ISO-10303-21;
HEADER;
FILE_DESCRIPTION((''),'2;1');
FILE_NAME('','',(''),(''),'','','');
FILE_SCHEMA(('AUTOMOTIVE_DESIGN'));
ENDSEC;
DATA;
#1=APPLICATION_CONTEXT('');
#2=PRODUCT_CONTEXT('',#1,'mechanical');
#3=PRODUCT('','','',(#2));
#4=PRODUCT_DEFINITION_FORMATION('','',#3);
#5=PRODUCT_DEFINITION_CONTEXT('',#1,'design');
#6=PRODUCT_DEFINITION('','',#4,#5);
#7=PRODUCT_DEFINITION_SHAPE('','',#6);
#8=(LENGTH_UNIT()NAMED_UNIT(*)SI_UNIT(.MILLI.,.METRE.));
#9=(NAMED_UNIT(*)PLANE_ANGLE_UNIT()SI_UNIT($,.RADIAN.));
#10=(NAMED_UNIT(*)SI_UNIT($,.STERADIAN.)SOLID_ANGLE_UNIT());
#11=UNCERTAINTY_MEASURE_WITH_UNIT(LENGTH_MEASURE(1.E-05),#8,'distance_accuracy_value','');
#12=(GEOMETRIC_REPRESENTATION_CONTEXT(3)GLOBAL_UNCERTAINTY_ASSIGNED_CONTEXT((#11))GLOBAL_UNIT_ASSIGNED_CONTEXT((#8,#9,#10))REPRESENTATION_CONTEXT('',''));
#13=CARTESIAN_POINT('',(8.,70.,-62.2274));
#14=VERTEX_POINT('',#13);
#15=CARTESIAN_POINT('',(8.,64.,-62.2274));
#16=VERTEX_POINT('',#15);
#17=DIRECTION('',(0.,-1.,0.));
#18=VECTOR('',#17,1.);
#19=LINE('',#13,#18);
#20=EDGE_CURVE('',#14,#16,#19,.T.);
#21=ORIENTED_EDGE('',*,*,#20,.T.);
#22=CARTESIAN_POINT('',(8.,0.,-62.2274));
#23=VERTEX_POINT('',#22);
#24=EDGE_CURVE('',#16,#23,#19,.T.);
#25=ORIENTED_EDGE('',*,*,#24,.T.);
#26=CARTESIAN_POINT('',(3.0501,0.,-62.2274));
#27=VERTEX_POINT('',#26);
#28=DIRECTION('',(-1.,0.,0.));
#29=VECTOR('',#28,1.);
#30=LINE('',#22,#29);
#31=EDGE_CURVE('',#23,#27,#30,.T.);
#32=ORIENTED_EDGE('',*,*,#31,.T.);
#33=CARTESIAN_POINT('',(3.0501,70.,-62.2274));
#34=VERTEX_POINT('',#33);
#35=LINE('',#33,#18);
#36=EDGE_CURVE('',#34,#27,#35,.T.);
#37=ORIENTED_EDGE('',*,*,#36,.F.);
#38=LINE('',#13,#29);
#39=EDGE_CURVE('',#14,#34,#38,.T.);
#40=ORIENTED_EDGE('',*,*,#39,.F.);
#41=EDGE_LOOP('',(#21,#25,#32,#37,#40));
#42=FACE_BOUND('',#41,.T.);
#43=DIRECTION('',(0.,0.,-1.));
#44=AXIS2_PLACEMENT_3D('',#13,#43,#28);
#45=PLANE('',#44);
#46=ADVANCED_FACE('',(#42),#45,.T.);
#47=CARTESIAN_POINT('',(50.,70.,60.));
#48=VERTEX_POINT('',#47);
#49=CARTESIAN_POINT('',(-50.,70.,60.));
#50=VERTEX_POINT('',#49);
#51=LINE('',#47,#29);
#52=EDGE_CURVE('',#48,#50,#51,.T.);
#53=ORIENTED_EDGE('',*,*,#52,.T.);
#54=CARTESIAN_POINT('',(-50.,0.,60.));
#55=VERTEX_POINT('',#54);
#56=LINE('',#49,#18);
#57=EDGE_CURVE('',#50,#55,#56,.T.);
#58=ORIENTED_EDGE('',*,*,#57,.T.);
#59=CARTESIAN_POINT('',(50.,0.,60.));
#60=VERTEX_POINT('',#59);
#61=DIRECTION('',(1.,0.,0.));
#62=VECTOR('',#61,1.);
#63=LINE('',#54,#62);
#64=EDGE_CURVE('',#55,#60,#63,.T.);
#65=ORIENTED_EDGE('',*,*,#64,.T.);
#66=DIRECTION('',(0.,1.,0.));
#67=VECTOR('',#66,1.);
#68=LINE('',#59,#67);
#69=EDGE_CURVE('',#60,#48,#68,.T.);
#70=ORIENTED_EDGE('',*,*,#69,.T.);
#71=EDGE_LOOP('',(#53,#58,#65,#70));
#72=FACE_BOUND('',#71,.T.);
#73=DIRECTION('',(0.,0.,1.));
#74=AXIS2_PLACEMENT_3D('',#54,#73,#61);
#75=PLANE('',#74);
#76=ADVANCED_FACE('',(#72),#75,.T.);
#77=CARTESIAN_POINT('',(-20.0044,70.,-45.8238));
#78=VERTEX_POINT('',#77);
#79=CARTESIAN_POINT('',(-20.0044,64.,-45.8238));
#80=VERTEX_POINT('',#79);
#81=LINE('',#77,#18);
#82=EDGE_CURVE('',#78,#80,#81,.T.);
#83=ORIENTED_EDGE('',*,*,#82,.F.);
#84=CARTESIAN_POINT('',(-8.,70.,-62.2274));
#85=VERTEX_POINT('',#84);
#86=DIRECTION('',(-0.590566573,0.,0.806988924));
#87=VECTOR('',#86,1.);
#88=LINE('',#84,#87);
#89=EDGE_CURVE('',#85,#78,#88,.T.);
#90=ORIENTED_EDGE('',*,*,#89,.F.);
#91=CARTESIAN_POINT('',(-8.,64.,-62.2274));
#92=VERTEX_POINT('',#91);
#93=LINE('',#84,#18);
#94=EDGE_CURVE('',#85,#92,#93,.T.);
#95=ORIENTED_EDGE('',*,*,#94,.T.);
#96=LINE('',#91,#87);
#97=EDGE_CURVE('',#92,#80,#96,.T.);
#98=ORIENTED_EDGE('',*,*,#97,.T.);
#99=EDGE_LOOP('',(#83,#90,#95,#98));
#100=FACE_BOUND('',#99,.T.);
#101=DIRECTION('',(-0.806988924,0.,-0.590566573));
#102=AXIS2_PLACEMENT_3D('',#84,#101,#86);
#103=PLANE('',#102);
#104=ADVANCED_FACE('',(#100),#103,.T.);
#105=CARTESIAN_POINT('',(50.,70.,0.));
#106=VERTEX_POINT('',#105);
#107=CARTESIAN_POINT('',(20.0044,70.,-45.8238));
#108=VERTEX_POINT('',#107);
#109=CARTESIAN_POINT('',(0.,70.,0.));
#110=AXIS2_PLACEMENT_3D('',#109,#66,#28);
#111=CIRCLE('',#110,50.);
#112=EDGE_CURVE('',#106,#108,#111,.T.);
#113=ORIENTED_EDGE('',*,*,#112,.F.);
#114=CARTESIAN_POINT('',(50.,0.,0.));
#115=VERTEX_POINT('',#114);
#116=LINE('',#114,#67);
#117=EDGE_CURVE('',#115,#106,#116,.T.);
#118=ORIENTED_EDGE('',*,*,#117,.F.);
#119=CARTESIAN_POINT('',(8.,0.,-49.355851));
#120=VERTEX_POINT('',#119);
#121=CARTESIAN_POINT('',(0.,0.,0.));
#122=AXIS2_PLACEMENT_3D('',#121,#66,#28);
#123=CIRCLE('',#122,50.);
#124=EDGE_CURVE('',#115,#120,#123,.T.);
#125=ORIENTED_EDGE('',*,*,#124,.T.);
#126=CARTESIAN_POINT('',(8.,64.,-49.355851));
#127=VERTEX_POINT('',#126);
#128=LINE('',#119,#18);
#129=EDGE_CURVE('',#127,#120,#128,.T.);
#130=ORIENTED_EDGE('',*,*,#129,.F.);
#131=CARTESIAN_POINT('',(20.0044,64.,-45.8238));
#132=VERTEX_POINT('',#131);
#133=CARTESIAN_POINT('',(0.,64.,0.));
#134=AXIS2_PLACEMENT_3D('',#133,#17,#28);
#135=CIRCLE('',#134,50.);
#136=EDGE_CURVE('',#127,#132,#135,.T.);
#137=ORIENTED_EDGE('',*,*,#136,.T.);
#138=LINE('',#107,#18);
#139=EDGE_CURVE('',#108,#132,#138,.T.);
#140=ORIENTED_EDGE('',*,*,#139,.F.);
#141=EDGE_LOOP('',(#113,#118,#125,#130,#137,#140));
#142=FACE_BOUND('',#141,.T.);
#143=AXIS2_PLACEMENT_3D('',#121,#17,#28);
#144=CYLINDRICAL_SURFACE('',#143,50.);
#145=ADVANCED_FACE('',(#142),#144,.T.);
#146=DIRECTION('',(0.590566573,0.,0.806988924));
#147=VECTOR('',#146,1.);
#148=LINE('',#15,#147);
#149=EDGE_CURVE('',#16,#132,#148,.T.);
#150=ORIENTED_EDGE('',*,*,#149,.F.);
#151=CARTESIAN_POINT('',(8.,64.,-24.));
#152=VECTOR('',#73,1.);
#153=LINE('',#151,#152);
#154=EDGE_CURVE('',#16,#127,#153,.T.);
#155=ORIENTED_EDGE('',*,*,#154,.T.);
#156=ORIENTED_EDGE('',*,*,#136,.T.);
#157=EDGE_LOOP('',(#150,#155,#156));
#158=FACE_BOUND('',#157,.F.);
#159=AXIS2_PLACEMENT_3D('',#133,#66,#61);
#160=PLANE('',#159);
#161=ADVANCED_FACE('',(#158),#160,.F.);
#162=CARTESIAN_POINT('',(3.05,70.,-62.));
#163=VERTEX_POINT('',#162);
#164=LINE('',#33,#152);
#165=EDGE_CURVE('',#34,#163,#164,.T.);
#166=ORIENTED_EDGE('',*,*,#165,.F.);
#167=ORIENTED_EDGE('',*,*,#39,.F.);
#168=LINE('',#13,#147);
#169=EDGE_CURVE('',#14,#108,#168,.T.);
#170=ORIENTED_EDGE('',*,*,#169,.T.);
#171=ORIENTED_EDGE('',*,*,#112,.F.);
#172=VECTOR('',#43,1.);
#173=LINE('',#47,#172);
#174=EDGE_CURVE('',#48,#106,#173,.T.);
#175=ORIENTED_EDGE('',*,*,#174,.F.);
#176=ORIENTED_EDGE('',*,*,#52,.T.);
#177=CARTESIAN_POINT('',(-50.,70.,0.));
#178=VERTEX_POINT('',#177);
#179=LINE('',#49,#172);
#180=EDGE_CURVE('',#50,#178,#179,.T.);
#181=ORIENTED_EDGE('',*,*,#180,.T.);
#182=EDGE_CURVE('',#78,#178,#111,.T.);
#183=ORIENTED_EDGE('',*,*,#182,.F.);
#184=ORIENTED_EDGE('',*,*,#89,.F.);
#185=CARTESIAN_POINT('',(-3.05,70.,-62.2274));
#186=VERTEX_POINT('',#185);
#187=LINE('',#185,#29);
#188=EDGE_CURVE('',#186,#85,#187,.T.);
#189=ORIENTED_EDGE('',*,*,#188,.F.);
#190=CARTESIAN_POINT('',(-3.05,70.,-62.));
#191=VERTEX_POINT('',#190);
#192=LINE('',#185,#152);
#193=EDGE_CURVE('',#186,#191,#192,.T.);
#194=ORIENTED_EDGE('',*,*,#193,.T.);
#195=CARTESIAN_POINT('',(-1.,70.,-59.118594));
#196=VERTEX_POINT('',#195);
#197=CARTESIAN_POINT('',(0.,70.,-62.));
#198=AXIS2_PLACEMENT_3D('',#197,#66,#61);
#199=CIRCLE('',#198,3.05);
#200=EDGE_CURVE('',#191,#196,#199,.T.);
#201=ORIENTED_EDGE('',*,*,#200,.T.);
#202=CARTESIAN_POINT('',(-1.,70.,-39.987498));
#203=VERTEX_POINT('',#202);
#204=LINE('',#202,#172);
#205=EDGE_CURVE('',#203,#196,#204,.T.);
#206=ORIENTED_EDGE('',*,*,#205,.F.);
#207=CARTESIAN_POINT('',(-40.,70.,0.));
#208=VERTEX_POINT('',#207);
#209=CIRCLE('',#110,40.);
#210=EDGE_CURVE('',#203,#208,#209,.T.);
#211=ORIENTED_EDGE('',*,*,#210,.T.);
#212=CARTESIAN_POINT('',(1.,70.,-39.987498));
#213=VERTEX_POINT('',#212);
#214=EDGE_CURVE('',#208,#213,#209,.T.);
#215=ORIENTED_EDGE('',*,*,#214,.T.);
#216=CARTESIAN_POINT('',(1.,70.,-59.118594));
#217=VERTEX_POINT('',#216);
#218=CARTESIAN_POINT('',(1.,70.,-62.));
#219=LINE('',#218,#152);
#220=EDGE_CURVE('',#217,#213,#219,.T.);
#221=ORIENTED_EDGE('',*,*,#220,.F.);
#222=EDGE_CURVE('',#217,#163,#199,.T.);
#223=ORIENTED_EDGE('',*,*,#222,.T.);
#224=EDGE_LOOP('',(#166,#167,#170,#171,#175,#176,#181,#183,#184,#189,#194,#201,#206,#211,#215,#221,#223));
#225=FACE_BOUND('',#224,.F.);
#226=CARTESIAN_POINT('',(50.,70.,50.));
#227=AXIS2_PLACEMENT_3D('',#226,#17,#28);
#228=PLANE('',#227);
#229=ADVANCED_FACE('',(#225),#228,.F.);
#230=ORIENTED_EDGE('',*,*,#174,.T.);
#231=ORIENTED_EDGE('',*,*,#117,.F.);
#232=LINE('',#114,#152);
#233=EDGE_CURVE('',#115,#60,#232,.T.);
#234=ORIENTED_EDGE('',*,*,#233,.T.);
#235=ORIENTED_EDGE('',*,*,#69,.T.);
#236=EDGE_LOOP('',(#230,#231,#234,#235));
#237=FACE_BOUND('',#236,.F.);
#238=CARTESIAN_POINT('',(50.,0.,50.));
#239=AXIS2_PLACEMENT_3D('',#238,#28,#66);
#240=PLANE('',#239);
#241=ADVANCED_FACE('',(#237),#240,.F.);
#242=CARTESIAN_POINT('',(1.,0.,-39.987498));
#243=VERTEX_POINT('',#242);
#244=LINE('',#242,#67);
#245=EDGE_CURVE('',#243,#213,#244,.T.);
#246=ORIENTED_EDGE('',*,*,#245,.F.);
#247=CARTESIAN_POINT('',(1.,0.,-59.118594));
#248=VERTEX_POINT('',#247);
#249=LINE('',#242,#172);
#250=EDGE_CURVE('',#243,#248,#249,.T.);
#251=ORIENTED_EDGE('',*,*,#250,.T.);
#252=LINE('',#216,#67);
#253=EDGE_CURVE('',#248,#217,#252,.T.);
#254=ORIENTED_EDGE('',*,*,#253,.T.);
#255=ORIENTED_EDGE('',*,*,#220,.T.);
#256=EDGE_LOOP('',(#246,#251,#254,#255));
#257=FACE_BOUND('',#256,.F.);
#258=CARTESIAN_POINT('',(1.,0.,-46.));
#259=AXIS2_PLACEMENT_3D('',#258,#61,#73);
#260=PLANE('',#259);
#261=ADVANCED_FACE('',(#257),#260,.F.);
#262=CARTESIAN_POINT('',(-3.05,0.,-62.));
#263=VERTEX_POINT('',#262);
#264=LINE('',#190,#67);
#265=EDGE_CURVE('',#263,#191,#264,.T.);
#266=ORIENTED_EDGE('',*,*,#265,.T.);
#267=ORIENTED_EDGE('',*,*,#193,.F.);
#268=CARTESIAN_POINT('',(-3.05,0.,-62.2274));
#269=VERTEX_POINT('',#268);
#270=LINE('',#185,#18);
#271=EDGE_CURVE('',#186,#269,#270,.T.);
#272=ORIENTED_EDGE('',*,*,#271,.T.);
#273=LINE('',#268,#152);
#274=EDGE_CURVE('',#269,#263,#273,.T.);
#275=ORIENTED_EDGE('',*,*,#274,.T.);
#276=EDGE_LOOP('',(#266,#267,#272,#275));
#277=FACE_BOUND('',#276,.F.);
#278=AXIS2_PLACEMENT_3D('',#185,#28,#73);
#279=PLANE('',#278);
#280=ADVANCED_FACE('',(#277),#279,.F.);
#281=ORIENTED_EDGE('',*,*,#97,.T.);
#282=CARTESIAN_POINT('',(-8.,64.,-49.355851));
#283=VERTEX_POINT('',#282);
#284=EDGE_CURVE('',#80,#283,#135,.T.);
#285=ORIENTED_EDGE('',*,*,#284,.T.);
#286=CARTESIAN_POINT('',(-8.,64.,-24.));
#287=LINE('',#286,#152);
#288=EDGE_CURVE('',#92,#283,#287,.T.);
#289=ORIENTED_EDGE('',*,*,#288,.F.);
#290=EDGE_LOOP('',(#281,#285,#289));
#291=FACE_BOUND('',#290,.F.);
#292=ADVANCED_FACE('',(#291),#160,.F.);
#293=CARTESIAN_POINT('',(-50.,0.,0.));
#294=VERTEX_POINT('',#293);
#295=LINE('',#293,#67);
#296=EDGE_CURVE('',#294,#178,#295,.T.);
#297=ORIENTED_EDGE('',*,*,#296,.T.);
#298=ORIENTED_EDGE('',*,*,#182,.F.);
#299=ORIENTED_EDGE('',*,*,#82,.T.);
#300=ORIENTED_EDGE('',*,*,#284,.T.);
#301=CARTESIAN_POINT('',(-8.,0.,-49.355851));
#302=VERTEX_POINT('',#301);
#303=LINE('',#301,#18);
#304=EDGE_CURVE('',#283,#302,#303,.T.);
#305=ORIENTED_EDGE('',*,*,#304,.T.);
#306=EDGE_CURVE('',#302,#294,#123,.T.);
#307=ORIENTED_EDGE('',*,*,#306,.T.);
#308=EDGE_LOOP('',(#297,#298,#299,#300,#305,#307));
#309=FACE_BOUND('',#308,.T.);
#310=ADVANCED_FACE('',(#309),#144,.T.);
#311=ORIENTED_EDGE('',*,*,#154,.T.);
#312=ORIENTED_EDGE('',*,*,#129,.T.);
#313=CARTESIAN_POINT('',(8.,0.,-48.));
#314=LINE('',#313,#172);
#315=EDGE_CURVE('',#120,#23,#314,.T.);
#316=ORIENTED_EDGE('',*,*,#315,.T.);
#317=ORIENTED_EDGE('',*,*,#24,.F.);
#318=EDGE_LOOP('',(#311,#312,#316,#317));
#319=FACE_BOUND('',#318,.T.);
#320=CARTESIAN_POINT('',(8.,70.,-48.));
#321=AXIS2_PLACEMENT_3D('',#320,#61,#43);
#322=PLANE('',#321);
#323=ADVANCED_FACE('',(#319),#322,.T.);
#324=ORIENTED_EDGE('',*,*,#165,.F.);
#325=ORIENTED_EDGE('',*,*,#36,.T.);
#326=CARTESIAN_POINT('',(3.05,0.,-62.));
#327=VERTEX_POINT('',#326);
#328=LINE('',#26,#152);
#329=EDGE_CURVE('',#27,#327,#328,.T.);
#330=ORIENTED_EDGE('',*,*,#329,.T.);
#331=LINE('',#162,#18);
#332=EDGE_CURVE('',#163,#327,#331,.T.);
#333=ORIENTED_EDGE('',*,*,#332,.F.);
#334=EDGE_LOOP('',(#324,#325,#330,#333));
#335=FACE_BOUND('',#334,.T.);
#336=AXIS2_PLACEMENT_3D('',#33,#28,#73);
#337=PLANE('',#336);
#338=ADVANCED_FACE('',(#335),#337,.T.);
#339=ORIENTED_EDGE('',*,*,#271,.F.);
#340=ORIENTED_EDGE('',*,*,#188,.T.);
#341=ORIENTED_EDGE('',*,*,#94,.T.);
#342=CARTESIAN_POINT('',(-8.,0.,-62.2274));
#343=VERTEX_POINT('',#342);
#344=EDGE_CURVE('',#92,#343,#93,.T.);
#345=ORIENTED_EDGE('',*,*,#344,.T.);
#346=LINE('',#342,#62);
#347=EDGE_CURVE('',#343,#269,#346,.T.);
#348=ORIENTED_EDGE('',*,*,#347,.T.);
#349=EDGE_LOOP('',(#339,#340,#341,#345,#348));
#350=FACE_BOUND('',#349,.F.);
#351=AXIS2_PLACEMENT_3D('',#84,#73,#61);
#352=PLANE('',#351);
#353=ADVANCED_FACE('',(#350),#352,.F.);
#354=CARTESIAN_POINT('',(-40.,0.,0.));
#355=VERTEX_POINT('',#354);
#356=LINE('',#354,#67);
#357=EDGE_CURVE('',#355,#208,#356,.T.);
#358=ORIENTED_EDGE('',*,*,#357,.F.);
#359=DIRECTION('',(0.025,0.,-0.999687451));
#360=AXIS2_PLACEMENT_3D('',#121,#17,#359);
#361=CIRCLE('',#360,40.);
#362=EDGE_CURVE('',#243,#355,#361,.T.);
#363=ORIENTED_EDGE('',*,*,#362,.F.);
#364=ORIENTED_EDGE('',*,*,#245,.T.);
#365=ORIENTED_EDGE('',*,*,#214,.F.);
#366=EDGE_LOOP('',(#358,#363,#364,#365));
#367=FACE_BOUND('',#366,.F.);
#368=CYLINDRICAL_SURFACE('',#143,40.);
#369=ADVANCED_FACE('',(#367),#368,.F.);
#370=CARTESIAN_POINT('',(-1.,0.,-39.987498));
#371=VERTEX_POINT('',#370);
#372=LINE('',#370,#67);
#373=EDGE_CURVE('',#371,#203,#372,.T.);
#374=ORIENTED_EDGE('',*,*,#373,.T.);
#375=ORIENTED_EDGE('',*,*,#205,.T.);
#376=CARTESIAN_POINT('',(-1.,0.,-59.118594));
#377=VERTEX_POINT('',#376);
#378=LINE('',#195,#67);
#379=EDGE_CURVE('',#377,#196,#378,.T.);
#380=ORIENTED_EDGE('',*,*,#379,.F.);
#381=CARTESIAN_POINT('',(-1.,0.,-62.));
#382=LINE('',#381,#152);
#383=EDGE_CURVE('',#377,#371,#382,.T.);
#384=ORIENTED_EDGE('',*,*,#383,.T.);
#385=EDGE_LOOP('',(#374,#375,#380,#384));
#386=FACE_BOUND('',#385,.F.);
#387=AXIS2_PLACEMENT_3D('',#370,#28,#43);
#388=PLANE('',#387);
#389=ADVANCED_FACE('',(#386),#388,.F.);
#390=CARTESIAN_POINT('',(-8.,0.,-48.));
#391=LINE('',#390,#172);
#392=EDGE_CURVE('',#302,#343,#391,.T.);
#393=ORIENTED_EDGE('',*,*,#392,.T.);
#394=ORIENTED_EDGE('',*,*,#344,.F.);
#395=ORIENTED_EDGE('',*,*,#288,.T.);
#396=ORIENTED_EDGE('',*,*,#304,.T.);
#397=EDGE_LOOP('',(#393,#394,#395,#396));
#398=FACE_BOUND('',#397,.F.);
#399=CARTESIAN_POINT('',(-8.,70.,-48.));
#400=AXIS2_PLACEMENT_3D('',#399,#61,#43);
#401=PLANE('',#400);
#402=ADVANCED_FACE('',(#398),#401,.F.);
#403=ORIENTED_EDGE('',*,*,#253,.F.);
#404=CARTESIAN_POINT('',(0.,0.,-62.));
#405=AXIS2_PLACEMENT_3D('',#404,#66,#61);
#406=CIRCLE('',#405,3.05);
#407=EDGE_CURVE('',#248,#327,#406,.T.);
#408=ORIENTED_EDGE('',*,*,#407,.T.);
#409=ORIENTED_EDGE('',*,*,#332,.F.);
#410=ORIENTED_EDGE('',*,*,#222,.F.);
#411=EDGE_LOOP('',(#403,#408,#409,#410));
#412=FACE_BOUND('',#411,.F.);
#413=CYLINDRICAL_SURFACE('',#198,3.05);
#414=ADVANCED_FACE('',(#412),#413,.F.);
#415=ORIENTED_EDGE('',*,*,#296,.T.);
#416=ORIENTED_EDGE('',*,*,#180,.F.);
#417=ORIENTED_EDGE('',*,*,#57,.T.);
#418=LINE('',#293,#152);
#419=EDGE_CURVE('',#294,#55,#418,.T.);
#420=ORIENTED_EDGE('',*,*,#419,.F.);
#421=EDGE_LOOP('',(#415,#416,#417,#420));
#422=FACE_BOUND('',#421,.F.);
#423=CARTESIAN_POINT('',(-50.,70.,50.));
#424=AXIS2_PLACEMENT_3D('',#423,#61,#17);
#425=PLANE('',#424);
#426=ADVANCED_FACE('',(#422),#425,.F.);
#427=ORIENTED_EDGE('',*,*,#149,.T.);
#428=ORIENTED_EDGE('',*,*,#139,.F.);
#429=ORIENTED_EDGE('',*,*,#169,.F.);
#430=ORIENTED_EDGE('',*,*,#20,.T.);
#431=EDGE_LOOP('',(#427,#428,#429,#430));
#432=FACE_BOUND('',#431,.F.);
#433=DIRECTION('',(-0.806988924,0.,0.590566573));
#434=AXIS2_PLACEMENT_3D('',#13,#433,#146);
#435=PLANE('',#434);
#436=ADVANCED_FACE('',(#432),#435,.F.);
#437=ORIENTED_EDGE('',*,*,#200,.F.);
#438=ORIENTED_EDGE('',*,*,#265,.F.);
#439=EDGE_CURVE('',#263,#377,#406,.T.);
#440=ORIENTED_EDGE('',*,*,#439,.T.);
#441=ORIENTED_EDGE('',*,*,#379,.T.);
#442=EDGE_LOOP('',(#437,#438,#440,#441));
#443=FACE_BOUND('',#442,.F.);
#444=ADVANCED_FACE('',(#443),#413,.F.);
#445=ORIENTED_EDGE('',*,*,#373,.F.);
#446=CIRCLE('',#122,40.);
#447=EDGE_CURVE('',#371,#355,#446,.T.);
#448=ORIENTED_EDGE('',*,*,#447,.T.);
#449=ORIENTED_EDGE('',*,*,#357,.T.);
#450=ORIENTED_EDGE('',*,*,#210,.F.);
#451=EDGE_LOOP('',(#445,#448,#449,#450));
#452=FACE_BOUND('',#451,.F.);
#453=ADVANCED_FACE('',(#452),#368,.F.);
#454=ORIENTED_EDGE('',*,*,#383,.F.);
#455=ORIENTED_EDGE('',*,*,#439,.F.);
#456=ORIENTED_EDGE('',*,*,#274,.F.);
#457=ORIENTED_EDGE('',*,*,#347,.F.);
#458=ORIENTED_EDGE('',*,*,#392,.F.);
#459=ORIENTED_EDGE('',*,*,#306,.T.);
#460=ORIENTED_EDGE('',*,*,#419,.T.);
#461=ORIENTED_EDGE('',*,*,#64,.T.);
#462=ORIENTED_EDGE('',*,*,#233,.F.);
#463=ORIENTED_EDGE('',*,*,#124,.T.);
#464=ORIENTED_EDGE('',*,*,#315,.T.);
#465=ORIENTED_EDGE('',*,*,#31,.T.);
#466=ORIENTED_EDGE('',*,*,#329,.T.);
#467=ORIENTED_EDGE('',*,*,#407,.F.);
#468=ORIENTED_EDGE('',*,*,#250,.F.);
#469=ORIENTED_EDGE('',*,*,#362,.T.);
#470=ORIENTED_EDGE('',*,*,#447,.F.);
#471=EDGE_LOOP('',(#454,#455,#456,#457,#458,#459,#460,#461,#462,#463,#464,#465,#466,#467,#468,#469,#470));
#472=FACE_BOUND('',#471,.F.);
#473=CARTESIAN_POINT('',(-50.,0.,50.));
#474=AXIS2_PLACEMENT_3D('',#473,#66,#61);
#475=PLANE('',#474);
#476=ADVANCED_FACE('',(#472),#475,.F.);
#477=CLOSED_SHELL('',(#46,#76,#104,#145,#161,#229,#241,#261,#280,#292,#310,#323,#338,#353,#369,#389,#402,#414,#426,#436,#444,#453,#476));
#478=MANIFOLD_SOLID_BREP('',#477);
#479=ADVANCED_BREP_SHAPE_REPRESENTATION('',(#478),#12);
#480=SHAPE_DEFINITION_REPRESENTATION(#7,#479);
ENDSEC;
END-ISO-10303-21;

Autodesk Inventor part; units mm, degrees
ref_plane "YZ Plane" through (0, 0, 0) normal (1, 0, 0) x (0, 1, 0)
ref_plane "XZ Plane" through (0, 0, 0) normal (0, 1, 0) x (-1, 0, 0)
ref_plane "XY Plane" through (0, 0, 0) normal (0, 0, 1) x (1, 0, 0)
sketch "Sketch1" plane through (0, 0, 0) normal (0, 1, 0) x (-1, 0, 0)
  circle A0 centre (0, 0) radius 50
  circle A1 centre (0, 0) radius 40
  line L0 (50, 0) -> (-50, 0)
  line L1 (-50, 0) -> (-50, 50)
  line L2 (-50, 50) -> (50, 50)
  line L3 (50, 50) -> (50, 0)
  line L4 (6, -46) -> (-6, -46)
  line L5 (-6, -46) -> (-6, -62)
  line L6 (-6, -62) -> (6, -62)
  line L7 (6, -62) -> (6, -46)
  line L8 (1, -64) -> (-1, -64)
  line L9 (-1, -64) -> (-1, -35)
  line L10 (-1, -35) -> (1, -35)
  line L11 (1, -35) -> (1, -64)
  point P0 (1, -39.9875)
  point P1 (1, -62)
  point P2 (6, -49.6387)
  point P3 (-6, -49.6387)
  point P4 (-1, -62)
  point P5 (-1, -39.9875)
  dimension "d0" = 100
extrude "Extrusion1" add sketch "Sketch1" along normal blind 70 contours L0 A1 A0 | A0 L7 L4 L11 A1 L0 | A0 L2 L3 | A0 L1 L2 | L7 L6 L11 A0 | A0 L11 L4 L7 | L0 A1 L9 L4 L5 A0 | L5 L4 L9 A0 | A0 L9 L6 L5
sketch "Sketch2" plane through (0, 70, 0) normal (0, 1, 0) x (1, 0, 0)
  circle A0 centre (0, 62) radius 3.05
  dimension "d9" = 6.1
extrude "Extrusion2" cut sketch "Sketch2" against normal blind 100
sketch "Sketch3" plane through (0, 70, 0) normal (0, 1, 0) x (1, 0, 0)
  line L0 (-3.05, 48) -> (-8, 48)
  line L1 (-8, 48) -> (-8, 62.2274)
  line L2 (-8, 62.2274) -> (-3.05, 62.2274)
  line L3 (-3.05, 62.2274) -> (-3.05, 48)
  line L4 (3.0501, 48) -> (8, 48)
  line L5 (8, 48) -> (8, 62.2274)
  line L6 (8, 62.2274) -> (3.0501, 62.2274)
  line L7 (3.0501, 62.2274) -> (3.0501, 48)
extrude "Extrusion3" add sketch "Sketch3" against normal up to surface (70 mm away)
sketch "Sketch4" plane through (0, 70, 0) normal (0, 1, 0) x (1, 0, 0)
  line L0 (8, 62.2274) -> (3.0501, 62.2274) construction
  line L1 (-3.05, 62.2274) -> (-8, 62.2274) construction
  arc A0 (-8, 49.3559) -> (-50, 0) centre (0, 0) ccw construction
  arc A1 (50, 0) -> (8, 49.3559) centre (0, 0) ccw construction
  line L2 (-8, 62.2274) -> (-20.0044, 45.8238)
  line L3 (8, 62.2274) -> (20.0044, 45.8238)
  line L4 (-20.0044, 45.8238) -> (-5.525, 45.8238)
  line L5 (-5.525, 45.8238) -> (-5.525, 62.2274)
  line L6 (-8, 62.2274) -> (-5.525, 62.2274)
  line L7 (20.0044, 45.8238) -> (5.5251, 45.8238)
  line L8 (5.5251, 45.8238) -> (5.5251, 62.2274)
  line L9 (5.5251, 62.2274) -> (8, 62.2274)
extrude "Extrusion4" add sketch "Sketch4" against normal blind 6
sketch "Sketch5" plane through (-50, 0, 50) normal (0, 0, 1) x (1, 0, 0)
  line L0 (46.95, 70) -> (46.95, 0) construction
  line L1 (0, 0) -> (100, 0) construction
  line L2 (100, 0) -> (100, 70) construction
  line L3 (0, 70) -> (100, 70) construction
  line L4 (0, 0) -> (0, 70) construction
  line L5 (0, 0) -> (100, 0)
  line L6 (100, 0) -> (100, 70)
  line L7 (100, 70) -> (0, 70)
  line L8 (0, 70) -> (0, 0)
  point P0 (50, 0)
extrude "Extrusion5" add sketch "Sketch5" along normal blind 10
properties part number "MotorClamp"
